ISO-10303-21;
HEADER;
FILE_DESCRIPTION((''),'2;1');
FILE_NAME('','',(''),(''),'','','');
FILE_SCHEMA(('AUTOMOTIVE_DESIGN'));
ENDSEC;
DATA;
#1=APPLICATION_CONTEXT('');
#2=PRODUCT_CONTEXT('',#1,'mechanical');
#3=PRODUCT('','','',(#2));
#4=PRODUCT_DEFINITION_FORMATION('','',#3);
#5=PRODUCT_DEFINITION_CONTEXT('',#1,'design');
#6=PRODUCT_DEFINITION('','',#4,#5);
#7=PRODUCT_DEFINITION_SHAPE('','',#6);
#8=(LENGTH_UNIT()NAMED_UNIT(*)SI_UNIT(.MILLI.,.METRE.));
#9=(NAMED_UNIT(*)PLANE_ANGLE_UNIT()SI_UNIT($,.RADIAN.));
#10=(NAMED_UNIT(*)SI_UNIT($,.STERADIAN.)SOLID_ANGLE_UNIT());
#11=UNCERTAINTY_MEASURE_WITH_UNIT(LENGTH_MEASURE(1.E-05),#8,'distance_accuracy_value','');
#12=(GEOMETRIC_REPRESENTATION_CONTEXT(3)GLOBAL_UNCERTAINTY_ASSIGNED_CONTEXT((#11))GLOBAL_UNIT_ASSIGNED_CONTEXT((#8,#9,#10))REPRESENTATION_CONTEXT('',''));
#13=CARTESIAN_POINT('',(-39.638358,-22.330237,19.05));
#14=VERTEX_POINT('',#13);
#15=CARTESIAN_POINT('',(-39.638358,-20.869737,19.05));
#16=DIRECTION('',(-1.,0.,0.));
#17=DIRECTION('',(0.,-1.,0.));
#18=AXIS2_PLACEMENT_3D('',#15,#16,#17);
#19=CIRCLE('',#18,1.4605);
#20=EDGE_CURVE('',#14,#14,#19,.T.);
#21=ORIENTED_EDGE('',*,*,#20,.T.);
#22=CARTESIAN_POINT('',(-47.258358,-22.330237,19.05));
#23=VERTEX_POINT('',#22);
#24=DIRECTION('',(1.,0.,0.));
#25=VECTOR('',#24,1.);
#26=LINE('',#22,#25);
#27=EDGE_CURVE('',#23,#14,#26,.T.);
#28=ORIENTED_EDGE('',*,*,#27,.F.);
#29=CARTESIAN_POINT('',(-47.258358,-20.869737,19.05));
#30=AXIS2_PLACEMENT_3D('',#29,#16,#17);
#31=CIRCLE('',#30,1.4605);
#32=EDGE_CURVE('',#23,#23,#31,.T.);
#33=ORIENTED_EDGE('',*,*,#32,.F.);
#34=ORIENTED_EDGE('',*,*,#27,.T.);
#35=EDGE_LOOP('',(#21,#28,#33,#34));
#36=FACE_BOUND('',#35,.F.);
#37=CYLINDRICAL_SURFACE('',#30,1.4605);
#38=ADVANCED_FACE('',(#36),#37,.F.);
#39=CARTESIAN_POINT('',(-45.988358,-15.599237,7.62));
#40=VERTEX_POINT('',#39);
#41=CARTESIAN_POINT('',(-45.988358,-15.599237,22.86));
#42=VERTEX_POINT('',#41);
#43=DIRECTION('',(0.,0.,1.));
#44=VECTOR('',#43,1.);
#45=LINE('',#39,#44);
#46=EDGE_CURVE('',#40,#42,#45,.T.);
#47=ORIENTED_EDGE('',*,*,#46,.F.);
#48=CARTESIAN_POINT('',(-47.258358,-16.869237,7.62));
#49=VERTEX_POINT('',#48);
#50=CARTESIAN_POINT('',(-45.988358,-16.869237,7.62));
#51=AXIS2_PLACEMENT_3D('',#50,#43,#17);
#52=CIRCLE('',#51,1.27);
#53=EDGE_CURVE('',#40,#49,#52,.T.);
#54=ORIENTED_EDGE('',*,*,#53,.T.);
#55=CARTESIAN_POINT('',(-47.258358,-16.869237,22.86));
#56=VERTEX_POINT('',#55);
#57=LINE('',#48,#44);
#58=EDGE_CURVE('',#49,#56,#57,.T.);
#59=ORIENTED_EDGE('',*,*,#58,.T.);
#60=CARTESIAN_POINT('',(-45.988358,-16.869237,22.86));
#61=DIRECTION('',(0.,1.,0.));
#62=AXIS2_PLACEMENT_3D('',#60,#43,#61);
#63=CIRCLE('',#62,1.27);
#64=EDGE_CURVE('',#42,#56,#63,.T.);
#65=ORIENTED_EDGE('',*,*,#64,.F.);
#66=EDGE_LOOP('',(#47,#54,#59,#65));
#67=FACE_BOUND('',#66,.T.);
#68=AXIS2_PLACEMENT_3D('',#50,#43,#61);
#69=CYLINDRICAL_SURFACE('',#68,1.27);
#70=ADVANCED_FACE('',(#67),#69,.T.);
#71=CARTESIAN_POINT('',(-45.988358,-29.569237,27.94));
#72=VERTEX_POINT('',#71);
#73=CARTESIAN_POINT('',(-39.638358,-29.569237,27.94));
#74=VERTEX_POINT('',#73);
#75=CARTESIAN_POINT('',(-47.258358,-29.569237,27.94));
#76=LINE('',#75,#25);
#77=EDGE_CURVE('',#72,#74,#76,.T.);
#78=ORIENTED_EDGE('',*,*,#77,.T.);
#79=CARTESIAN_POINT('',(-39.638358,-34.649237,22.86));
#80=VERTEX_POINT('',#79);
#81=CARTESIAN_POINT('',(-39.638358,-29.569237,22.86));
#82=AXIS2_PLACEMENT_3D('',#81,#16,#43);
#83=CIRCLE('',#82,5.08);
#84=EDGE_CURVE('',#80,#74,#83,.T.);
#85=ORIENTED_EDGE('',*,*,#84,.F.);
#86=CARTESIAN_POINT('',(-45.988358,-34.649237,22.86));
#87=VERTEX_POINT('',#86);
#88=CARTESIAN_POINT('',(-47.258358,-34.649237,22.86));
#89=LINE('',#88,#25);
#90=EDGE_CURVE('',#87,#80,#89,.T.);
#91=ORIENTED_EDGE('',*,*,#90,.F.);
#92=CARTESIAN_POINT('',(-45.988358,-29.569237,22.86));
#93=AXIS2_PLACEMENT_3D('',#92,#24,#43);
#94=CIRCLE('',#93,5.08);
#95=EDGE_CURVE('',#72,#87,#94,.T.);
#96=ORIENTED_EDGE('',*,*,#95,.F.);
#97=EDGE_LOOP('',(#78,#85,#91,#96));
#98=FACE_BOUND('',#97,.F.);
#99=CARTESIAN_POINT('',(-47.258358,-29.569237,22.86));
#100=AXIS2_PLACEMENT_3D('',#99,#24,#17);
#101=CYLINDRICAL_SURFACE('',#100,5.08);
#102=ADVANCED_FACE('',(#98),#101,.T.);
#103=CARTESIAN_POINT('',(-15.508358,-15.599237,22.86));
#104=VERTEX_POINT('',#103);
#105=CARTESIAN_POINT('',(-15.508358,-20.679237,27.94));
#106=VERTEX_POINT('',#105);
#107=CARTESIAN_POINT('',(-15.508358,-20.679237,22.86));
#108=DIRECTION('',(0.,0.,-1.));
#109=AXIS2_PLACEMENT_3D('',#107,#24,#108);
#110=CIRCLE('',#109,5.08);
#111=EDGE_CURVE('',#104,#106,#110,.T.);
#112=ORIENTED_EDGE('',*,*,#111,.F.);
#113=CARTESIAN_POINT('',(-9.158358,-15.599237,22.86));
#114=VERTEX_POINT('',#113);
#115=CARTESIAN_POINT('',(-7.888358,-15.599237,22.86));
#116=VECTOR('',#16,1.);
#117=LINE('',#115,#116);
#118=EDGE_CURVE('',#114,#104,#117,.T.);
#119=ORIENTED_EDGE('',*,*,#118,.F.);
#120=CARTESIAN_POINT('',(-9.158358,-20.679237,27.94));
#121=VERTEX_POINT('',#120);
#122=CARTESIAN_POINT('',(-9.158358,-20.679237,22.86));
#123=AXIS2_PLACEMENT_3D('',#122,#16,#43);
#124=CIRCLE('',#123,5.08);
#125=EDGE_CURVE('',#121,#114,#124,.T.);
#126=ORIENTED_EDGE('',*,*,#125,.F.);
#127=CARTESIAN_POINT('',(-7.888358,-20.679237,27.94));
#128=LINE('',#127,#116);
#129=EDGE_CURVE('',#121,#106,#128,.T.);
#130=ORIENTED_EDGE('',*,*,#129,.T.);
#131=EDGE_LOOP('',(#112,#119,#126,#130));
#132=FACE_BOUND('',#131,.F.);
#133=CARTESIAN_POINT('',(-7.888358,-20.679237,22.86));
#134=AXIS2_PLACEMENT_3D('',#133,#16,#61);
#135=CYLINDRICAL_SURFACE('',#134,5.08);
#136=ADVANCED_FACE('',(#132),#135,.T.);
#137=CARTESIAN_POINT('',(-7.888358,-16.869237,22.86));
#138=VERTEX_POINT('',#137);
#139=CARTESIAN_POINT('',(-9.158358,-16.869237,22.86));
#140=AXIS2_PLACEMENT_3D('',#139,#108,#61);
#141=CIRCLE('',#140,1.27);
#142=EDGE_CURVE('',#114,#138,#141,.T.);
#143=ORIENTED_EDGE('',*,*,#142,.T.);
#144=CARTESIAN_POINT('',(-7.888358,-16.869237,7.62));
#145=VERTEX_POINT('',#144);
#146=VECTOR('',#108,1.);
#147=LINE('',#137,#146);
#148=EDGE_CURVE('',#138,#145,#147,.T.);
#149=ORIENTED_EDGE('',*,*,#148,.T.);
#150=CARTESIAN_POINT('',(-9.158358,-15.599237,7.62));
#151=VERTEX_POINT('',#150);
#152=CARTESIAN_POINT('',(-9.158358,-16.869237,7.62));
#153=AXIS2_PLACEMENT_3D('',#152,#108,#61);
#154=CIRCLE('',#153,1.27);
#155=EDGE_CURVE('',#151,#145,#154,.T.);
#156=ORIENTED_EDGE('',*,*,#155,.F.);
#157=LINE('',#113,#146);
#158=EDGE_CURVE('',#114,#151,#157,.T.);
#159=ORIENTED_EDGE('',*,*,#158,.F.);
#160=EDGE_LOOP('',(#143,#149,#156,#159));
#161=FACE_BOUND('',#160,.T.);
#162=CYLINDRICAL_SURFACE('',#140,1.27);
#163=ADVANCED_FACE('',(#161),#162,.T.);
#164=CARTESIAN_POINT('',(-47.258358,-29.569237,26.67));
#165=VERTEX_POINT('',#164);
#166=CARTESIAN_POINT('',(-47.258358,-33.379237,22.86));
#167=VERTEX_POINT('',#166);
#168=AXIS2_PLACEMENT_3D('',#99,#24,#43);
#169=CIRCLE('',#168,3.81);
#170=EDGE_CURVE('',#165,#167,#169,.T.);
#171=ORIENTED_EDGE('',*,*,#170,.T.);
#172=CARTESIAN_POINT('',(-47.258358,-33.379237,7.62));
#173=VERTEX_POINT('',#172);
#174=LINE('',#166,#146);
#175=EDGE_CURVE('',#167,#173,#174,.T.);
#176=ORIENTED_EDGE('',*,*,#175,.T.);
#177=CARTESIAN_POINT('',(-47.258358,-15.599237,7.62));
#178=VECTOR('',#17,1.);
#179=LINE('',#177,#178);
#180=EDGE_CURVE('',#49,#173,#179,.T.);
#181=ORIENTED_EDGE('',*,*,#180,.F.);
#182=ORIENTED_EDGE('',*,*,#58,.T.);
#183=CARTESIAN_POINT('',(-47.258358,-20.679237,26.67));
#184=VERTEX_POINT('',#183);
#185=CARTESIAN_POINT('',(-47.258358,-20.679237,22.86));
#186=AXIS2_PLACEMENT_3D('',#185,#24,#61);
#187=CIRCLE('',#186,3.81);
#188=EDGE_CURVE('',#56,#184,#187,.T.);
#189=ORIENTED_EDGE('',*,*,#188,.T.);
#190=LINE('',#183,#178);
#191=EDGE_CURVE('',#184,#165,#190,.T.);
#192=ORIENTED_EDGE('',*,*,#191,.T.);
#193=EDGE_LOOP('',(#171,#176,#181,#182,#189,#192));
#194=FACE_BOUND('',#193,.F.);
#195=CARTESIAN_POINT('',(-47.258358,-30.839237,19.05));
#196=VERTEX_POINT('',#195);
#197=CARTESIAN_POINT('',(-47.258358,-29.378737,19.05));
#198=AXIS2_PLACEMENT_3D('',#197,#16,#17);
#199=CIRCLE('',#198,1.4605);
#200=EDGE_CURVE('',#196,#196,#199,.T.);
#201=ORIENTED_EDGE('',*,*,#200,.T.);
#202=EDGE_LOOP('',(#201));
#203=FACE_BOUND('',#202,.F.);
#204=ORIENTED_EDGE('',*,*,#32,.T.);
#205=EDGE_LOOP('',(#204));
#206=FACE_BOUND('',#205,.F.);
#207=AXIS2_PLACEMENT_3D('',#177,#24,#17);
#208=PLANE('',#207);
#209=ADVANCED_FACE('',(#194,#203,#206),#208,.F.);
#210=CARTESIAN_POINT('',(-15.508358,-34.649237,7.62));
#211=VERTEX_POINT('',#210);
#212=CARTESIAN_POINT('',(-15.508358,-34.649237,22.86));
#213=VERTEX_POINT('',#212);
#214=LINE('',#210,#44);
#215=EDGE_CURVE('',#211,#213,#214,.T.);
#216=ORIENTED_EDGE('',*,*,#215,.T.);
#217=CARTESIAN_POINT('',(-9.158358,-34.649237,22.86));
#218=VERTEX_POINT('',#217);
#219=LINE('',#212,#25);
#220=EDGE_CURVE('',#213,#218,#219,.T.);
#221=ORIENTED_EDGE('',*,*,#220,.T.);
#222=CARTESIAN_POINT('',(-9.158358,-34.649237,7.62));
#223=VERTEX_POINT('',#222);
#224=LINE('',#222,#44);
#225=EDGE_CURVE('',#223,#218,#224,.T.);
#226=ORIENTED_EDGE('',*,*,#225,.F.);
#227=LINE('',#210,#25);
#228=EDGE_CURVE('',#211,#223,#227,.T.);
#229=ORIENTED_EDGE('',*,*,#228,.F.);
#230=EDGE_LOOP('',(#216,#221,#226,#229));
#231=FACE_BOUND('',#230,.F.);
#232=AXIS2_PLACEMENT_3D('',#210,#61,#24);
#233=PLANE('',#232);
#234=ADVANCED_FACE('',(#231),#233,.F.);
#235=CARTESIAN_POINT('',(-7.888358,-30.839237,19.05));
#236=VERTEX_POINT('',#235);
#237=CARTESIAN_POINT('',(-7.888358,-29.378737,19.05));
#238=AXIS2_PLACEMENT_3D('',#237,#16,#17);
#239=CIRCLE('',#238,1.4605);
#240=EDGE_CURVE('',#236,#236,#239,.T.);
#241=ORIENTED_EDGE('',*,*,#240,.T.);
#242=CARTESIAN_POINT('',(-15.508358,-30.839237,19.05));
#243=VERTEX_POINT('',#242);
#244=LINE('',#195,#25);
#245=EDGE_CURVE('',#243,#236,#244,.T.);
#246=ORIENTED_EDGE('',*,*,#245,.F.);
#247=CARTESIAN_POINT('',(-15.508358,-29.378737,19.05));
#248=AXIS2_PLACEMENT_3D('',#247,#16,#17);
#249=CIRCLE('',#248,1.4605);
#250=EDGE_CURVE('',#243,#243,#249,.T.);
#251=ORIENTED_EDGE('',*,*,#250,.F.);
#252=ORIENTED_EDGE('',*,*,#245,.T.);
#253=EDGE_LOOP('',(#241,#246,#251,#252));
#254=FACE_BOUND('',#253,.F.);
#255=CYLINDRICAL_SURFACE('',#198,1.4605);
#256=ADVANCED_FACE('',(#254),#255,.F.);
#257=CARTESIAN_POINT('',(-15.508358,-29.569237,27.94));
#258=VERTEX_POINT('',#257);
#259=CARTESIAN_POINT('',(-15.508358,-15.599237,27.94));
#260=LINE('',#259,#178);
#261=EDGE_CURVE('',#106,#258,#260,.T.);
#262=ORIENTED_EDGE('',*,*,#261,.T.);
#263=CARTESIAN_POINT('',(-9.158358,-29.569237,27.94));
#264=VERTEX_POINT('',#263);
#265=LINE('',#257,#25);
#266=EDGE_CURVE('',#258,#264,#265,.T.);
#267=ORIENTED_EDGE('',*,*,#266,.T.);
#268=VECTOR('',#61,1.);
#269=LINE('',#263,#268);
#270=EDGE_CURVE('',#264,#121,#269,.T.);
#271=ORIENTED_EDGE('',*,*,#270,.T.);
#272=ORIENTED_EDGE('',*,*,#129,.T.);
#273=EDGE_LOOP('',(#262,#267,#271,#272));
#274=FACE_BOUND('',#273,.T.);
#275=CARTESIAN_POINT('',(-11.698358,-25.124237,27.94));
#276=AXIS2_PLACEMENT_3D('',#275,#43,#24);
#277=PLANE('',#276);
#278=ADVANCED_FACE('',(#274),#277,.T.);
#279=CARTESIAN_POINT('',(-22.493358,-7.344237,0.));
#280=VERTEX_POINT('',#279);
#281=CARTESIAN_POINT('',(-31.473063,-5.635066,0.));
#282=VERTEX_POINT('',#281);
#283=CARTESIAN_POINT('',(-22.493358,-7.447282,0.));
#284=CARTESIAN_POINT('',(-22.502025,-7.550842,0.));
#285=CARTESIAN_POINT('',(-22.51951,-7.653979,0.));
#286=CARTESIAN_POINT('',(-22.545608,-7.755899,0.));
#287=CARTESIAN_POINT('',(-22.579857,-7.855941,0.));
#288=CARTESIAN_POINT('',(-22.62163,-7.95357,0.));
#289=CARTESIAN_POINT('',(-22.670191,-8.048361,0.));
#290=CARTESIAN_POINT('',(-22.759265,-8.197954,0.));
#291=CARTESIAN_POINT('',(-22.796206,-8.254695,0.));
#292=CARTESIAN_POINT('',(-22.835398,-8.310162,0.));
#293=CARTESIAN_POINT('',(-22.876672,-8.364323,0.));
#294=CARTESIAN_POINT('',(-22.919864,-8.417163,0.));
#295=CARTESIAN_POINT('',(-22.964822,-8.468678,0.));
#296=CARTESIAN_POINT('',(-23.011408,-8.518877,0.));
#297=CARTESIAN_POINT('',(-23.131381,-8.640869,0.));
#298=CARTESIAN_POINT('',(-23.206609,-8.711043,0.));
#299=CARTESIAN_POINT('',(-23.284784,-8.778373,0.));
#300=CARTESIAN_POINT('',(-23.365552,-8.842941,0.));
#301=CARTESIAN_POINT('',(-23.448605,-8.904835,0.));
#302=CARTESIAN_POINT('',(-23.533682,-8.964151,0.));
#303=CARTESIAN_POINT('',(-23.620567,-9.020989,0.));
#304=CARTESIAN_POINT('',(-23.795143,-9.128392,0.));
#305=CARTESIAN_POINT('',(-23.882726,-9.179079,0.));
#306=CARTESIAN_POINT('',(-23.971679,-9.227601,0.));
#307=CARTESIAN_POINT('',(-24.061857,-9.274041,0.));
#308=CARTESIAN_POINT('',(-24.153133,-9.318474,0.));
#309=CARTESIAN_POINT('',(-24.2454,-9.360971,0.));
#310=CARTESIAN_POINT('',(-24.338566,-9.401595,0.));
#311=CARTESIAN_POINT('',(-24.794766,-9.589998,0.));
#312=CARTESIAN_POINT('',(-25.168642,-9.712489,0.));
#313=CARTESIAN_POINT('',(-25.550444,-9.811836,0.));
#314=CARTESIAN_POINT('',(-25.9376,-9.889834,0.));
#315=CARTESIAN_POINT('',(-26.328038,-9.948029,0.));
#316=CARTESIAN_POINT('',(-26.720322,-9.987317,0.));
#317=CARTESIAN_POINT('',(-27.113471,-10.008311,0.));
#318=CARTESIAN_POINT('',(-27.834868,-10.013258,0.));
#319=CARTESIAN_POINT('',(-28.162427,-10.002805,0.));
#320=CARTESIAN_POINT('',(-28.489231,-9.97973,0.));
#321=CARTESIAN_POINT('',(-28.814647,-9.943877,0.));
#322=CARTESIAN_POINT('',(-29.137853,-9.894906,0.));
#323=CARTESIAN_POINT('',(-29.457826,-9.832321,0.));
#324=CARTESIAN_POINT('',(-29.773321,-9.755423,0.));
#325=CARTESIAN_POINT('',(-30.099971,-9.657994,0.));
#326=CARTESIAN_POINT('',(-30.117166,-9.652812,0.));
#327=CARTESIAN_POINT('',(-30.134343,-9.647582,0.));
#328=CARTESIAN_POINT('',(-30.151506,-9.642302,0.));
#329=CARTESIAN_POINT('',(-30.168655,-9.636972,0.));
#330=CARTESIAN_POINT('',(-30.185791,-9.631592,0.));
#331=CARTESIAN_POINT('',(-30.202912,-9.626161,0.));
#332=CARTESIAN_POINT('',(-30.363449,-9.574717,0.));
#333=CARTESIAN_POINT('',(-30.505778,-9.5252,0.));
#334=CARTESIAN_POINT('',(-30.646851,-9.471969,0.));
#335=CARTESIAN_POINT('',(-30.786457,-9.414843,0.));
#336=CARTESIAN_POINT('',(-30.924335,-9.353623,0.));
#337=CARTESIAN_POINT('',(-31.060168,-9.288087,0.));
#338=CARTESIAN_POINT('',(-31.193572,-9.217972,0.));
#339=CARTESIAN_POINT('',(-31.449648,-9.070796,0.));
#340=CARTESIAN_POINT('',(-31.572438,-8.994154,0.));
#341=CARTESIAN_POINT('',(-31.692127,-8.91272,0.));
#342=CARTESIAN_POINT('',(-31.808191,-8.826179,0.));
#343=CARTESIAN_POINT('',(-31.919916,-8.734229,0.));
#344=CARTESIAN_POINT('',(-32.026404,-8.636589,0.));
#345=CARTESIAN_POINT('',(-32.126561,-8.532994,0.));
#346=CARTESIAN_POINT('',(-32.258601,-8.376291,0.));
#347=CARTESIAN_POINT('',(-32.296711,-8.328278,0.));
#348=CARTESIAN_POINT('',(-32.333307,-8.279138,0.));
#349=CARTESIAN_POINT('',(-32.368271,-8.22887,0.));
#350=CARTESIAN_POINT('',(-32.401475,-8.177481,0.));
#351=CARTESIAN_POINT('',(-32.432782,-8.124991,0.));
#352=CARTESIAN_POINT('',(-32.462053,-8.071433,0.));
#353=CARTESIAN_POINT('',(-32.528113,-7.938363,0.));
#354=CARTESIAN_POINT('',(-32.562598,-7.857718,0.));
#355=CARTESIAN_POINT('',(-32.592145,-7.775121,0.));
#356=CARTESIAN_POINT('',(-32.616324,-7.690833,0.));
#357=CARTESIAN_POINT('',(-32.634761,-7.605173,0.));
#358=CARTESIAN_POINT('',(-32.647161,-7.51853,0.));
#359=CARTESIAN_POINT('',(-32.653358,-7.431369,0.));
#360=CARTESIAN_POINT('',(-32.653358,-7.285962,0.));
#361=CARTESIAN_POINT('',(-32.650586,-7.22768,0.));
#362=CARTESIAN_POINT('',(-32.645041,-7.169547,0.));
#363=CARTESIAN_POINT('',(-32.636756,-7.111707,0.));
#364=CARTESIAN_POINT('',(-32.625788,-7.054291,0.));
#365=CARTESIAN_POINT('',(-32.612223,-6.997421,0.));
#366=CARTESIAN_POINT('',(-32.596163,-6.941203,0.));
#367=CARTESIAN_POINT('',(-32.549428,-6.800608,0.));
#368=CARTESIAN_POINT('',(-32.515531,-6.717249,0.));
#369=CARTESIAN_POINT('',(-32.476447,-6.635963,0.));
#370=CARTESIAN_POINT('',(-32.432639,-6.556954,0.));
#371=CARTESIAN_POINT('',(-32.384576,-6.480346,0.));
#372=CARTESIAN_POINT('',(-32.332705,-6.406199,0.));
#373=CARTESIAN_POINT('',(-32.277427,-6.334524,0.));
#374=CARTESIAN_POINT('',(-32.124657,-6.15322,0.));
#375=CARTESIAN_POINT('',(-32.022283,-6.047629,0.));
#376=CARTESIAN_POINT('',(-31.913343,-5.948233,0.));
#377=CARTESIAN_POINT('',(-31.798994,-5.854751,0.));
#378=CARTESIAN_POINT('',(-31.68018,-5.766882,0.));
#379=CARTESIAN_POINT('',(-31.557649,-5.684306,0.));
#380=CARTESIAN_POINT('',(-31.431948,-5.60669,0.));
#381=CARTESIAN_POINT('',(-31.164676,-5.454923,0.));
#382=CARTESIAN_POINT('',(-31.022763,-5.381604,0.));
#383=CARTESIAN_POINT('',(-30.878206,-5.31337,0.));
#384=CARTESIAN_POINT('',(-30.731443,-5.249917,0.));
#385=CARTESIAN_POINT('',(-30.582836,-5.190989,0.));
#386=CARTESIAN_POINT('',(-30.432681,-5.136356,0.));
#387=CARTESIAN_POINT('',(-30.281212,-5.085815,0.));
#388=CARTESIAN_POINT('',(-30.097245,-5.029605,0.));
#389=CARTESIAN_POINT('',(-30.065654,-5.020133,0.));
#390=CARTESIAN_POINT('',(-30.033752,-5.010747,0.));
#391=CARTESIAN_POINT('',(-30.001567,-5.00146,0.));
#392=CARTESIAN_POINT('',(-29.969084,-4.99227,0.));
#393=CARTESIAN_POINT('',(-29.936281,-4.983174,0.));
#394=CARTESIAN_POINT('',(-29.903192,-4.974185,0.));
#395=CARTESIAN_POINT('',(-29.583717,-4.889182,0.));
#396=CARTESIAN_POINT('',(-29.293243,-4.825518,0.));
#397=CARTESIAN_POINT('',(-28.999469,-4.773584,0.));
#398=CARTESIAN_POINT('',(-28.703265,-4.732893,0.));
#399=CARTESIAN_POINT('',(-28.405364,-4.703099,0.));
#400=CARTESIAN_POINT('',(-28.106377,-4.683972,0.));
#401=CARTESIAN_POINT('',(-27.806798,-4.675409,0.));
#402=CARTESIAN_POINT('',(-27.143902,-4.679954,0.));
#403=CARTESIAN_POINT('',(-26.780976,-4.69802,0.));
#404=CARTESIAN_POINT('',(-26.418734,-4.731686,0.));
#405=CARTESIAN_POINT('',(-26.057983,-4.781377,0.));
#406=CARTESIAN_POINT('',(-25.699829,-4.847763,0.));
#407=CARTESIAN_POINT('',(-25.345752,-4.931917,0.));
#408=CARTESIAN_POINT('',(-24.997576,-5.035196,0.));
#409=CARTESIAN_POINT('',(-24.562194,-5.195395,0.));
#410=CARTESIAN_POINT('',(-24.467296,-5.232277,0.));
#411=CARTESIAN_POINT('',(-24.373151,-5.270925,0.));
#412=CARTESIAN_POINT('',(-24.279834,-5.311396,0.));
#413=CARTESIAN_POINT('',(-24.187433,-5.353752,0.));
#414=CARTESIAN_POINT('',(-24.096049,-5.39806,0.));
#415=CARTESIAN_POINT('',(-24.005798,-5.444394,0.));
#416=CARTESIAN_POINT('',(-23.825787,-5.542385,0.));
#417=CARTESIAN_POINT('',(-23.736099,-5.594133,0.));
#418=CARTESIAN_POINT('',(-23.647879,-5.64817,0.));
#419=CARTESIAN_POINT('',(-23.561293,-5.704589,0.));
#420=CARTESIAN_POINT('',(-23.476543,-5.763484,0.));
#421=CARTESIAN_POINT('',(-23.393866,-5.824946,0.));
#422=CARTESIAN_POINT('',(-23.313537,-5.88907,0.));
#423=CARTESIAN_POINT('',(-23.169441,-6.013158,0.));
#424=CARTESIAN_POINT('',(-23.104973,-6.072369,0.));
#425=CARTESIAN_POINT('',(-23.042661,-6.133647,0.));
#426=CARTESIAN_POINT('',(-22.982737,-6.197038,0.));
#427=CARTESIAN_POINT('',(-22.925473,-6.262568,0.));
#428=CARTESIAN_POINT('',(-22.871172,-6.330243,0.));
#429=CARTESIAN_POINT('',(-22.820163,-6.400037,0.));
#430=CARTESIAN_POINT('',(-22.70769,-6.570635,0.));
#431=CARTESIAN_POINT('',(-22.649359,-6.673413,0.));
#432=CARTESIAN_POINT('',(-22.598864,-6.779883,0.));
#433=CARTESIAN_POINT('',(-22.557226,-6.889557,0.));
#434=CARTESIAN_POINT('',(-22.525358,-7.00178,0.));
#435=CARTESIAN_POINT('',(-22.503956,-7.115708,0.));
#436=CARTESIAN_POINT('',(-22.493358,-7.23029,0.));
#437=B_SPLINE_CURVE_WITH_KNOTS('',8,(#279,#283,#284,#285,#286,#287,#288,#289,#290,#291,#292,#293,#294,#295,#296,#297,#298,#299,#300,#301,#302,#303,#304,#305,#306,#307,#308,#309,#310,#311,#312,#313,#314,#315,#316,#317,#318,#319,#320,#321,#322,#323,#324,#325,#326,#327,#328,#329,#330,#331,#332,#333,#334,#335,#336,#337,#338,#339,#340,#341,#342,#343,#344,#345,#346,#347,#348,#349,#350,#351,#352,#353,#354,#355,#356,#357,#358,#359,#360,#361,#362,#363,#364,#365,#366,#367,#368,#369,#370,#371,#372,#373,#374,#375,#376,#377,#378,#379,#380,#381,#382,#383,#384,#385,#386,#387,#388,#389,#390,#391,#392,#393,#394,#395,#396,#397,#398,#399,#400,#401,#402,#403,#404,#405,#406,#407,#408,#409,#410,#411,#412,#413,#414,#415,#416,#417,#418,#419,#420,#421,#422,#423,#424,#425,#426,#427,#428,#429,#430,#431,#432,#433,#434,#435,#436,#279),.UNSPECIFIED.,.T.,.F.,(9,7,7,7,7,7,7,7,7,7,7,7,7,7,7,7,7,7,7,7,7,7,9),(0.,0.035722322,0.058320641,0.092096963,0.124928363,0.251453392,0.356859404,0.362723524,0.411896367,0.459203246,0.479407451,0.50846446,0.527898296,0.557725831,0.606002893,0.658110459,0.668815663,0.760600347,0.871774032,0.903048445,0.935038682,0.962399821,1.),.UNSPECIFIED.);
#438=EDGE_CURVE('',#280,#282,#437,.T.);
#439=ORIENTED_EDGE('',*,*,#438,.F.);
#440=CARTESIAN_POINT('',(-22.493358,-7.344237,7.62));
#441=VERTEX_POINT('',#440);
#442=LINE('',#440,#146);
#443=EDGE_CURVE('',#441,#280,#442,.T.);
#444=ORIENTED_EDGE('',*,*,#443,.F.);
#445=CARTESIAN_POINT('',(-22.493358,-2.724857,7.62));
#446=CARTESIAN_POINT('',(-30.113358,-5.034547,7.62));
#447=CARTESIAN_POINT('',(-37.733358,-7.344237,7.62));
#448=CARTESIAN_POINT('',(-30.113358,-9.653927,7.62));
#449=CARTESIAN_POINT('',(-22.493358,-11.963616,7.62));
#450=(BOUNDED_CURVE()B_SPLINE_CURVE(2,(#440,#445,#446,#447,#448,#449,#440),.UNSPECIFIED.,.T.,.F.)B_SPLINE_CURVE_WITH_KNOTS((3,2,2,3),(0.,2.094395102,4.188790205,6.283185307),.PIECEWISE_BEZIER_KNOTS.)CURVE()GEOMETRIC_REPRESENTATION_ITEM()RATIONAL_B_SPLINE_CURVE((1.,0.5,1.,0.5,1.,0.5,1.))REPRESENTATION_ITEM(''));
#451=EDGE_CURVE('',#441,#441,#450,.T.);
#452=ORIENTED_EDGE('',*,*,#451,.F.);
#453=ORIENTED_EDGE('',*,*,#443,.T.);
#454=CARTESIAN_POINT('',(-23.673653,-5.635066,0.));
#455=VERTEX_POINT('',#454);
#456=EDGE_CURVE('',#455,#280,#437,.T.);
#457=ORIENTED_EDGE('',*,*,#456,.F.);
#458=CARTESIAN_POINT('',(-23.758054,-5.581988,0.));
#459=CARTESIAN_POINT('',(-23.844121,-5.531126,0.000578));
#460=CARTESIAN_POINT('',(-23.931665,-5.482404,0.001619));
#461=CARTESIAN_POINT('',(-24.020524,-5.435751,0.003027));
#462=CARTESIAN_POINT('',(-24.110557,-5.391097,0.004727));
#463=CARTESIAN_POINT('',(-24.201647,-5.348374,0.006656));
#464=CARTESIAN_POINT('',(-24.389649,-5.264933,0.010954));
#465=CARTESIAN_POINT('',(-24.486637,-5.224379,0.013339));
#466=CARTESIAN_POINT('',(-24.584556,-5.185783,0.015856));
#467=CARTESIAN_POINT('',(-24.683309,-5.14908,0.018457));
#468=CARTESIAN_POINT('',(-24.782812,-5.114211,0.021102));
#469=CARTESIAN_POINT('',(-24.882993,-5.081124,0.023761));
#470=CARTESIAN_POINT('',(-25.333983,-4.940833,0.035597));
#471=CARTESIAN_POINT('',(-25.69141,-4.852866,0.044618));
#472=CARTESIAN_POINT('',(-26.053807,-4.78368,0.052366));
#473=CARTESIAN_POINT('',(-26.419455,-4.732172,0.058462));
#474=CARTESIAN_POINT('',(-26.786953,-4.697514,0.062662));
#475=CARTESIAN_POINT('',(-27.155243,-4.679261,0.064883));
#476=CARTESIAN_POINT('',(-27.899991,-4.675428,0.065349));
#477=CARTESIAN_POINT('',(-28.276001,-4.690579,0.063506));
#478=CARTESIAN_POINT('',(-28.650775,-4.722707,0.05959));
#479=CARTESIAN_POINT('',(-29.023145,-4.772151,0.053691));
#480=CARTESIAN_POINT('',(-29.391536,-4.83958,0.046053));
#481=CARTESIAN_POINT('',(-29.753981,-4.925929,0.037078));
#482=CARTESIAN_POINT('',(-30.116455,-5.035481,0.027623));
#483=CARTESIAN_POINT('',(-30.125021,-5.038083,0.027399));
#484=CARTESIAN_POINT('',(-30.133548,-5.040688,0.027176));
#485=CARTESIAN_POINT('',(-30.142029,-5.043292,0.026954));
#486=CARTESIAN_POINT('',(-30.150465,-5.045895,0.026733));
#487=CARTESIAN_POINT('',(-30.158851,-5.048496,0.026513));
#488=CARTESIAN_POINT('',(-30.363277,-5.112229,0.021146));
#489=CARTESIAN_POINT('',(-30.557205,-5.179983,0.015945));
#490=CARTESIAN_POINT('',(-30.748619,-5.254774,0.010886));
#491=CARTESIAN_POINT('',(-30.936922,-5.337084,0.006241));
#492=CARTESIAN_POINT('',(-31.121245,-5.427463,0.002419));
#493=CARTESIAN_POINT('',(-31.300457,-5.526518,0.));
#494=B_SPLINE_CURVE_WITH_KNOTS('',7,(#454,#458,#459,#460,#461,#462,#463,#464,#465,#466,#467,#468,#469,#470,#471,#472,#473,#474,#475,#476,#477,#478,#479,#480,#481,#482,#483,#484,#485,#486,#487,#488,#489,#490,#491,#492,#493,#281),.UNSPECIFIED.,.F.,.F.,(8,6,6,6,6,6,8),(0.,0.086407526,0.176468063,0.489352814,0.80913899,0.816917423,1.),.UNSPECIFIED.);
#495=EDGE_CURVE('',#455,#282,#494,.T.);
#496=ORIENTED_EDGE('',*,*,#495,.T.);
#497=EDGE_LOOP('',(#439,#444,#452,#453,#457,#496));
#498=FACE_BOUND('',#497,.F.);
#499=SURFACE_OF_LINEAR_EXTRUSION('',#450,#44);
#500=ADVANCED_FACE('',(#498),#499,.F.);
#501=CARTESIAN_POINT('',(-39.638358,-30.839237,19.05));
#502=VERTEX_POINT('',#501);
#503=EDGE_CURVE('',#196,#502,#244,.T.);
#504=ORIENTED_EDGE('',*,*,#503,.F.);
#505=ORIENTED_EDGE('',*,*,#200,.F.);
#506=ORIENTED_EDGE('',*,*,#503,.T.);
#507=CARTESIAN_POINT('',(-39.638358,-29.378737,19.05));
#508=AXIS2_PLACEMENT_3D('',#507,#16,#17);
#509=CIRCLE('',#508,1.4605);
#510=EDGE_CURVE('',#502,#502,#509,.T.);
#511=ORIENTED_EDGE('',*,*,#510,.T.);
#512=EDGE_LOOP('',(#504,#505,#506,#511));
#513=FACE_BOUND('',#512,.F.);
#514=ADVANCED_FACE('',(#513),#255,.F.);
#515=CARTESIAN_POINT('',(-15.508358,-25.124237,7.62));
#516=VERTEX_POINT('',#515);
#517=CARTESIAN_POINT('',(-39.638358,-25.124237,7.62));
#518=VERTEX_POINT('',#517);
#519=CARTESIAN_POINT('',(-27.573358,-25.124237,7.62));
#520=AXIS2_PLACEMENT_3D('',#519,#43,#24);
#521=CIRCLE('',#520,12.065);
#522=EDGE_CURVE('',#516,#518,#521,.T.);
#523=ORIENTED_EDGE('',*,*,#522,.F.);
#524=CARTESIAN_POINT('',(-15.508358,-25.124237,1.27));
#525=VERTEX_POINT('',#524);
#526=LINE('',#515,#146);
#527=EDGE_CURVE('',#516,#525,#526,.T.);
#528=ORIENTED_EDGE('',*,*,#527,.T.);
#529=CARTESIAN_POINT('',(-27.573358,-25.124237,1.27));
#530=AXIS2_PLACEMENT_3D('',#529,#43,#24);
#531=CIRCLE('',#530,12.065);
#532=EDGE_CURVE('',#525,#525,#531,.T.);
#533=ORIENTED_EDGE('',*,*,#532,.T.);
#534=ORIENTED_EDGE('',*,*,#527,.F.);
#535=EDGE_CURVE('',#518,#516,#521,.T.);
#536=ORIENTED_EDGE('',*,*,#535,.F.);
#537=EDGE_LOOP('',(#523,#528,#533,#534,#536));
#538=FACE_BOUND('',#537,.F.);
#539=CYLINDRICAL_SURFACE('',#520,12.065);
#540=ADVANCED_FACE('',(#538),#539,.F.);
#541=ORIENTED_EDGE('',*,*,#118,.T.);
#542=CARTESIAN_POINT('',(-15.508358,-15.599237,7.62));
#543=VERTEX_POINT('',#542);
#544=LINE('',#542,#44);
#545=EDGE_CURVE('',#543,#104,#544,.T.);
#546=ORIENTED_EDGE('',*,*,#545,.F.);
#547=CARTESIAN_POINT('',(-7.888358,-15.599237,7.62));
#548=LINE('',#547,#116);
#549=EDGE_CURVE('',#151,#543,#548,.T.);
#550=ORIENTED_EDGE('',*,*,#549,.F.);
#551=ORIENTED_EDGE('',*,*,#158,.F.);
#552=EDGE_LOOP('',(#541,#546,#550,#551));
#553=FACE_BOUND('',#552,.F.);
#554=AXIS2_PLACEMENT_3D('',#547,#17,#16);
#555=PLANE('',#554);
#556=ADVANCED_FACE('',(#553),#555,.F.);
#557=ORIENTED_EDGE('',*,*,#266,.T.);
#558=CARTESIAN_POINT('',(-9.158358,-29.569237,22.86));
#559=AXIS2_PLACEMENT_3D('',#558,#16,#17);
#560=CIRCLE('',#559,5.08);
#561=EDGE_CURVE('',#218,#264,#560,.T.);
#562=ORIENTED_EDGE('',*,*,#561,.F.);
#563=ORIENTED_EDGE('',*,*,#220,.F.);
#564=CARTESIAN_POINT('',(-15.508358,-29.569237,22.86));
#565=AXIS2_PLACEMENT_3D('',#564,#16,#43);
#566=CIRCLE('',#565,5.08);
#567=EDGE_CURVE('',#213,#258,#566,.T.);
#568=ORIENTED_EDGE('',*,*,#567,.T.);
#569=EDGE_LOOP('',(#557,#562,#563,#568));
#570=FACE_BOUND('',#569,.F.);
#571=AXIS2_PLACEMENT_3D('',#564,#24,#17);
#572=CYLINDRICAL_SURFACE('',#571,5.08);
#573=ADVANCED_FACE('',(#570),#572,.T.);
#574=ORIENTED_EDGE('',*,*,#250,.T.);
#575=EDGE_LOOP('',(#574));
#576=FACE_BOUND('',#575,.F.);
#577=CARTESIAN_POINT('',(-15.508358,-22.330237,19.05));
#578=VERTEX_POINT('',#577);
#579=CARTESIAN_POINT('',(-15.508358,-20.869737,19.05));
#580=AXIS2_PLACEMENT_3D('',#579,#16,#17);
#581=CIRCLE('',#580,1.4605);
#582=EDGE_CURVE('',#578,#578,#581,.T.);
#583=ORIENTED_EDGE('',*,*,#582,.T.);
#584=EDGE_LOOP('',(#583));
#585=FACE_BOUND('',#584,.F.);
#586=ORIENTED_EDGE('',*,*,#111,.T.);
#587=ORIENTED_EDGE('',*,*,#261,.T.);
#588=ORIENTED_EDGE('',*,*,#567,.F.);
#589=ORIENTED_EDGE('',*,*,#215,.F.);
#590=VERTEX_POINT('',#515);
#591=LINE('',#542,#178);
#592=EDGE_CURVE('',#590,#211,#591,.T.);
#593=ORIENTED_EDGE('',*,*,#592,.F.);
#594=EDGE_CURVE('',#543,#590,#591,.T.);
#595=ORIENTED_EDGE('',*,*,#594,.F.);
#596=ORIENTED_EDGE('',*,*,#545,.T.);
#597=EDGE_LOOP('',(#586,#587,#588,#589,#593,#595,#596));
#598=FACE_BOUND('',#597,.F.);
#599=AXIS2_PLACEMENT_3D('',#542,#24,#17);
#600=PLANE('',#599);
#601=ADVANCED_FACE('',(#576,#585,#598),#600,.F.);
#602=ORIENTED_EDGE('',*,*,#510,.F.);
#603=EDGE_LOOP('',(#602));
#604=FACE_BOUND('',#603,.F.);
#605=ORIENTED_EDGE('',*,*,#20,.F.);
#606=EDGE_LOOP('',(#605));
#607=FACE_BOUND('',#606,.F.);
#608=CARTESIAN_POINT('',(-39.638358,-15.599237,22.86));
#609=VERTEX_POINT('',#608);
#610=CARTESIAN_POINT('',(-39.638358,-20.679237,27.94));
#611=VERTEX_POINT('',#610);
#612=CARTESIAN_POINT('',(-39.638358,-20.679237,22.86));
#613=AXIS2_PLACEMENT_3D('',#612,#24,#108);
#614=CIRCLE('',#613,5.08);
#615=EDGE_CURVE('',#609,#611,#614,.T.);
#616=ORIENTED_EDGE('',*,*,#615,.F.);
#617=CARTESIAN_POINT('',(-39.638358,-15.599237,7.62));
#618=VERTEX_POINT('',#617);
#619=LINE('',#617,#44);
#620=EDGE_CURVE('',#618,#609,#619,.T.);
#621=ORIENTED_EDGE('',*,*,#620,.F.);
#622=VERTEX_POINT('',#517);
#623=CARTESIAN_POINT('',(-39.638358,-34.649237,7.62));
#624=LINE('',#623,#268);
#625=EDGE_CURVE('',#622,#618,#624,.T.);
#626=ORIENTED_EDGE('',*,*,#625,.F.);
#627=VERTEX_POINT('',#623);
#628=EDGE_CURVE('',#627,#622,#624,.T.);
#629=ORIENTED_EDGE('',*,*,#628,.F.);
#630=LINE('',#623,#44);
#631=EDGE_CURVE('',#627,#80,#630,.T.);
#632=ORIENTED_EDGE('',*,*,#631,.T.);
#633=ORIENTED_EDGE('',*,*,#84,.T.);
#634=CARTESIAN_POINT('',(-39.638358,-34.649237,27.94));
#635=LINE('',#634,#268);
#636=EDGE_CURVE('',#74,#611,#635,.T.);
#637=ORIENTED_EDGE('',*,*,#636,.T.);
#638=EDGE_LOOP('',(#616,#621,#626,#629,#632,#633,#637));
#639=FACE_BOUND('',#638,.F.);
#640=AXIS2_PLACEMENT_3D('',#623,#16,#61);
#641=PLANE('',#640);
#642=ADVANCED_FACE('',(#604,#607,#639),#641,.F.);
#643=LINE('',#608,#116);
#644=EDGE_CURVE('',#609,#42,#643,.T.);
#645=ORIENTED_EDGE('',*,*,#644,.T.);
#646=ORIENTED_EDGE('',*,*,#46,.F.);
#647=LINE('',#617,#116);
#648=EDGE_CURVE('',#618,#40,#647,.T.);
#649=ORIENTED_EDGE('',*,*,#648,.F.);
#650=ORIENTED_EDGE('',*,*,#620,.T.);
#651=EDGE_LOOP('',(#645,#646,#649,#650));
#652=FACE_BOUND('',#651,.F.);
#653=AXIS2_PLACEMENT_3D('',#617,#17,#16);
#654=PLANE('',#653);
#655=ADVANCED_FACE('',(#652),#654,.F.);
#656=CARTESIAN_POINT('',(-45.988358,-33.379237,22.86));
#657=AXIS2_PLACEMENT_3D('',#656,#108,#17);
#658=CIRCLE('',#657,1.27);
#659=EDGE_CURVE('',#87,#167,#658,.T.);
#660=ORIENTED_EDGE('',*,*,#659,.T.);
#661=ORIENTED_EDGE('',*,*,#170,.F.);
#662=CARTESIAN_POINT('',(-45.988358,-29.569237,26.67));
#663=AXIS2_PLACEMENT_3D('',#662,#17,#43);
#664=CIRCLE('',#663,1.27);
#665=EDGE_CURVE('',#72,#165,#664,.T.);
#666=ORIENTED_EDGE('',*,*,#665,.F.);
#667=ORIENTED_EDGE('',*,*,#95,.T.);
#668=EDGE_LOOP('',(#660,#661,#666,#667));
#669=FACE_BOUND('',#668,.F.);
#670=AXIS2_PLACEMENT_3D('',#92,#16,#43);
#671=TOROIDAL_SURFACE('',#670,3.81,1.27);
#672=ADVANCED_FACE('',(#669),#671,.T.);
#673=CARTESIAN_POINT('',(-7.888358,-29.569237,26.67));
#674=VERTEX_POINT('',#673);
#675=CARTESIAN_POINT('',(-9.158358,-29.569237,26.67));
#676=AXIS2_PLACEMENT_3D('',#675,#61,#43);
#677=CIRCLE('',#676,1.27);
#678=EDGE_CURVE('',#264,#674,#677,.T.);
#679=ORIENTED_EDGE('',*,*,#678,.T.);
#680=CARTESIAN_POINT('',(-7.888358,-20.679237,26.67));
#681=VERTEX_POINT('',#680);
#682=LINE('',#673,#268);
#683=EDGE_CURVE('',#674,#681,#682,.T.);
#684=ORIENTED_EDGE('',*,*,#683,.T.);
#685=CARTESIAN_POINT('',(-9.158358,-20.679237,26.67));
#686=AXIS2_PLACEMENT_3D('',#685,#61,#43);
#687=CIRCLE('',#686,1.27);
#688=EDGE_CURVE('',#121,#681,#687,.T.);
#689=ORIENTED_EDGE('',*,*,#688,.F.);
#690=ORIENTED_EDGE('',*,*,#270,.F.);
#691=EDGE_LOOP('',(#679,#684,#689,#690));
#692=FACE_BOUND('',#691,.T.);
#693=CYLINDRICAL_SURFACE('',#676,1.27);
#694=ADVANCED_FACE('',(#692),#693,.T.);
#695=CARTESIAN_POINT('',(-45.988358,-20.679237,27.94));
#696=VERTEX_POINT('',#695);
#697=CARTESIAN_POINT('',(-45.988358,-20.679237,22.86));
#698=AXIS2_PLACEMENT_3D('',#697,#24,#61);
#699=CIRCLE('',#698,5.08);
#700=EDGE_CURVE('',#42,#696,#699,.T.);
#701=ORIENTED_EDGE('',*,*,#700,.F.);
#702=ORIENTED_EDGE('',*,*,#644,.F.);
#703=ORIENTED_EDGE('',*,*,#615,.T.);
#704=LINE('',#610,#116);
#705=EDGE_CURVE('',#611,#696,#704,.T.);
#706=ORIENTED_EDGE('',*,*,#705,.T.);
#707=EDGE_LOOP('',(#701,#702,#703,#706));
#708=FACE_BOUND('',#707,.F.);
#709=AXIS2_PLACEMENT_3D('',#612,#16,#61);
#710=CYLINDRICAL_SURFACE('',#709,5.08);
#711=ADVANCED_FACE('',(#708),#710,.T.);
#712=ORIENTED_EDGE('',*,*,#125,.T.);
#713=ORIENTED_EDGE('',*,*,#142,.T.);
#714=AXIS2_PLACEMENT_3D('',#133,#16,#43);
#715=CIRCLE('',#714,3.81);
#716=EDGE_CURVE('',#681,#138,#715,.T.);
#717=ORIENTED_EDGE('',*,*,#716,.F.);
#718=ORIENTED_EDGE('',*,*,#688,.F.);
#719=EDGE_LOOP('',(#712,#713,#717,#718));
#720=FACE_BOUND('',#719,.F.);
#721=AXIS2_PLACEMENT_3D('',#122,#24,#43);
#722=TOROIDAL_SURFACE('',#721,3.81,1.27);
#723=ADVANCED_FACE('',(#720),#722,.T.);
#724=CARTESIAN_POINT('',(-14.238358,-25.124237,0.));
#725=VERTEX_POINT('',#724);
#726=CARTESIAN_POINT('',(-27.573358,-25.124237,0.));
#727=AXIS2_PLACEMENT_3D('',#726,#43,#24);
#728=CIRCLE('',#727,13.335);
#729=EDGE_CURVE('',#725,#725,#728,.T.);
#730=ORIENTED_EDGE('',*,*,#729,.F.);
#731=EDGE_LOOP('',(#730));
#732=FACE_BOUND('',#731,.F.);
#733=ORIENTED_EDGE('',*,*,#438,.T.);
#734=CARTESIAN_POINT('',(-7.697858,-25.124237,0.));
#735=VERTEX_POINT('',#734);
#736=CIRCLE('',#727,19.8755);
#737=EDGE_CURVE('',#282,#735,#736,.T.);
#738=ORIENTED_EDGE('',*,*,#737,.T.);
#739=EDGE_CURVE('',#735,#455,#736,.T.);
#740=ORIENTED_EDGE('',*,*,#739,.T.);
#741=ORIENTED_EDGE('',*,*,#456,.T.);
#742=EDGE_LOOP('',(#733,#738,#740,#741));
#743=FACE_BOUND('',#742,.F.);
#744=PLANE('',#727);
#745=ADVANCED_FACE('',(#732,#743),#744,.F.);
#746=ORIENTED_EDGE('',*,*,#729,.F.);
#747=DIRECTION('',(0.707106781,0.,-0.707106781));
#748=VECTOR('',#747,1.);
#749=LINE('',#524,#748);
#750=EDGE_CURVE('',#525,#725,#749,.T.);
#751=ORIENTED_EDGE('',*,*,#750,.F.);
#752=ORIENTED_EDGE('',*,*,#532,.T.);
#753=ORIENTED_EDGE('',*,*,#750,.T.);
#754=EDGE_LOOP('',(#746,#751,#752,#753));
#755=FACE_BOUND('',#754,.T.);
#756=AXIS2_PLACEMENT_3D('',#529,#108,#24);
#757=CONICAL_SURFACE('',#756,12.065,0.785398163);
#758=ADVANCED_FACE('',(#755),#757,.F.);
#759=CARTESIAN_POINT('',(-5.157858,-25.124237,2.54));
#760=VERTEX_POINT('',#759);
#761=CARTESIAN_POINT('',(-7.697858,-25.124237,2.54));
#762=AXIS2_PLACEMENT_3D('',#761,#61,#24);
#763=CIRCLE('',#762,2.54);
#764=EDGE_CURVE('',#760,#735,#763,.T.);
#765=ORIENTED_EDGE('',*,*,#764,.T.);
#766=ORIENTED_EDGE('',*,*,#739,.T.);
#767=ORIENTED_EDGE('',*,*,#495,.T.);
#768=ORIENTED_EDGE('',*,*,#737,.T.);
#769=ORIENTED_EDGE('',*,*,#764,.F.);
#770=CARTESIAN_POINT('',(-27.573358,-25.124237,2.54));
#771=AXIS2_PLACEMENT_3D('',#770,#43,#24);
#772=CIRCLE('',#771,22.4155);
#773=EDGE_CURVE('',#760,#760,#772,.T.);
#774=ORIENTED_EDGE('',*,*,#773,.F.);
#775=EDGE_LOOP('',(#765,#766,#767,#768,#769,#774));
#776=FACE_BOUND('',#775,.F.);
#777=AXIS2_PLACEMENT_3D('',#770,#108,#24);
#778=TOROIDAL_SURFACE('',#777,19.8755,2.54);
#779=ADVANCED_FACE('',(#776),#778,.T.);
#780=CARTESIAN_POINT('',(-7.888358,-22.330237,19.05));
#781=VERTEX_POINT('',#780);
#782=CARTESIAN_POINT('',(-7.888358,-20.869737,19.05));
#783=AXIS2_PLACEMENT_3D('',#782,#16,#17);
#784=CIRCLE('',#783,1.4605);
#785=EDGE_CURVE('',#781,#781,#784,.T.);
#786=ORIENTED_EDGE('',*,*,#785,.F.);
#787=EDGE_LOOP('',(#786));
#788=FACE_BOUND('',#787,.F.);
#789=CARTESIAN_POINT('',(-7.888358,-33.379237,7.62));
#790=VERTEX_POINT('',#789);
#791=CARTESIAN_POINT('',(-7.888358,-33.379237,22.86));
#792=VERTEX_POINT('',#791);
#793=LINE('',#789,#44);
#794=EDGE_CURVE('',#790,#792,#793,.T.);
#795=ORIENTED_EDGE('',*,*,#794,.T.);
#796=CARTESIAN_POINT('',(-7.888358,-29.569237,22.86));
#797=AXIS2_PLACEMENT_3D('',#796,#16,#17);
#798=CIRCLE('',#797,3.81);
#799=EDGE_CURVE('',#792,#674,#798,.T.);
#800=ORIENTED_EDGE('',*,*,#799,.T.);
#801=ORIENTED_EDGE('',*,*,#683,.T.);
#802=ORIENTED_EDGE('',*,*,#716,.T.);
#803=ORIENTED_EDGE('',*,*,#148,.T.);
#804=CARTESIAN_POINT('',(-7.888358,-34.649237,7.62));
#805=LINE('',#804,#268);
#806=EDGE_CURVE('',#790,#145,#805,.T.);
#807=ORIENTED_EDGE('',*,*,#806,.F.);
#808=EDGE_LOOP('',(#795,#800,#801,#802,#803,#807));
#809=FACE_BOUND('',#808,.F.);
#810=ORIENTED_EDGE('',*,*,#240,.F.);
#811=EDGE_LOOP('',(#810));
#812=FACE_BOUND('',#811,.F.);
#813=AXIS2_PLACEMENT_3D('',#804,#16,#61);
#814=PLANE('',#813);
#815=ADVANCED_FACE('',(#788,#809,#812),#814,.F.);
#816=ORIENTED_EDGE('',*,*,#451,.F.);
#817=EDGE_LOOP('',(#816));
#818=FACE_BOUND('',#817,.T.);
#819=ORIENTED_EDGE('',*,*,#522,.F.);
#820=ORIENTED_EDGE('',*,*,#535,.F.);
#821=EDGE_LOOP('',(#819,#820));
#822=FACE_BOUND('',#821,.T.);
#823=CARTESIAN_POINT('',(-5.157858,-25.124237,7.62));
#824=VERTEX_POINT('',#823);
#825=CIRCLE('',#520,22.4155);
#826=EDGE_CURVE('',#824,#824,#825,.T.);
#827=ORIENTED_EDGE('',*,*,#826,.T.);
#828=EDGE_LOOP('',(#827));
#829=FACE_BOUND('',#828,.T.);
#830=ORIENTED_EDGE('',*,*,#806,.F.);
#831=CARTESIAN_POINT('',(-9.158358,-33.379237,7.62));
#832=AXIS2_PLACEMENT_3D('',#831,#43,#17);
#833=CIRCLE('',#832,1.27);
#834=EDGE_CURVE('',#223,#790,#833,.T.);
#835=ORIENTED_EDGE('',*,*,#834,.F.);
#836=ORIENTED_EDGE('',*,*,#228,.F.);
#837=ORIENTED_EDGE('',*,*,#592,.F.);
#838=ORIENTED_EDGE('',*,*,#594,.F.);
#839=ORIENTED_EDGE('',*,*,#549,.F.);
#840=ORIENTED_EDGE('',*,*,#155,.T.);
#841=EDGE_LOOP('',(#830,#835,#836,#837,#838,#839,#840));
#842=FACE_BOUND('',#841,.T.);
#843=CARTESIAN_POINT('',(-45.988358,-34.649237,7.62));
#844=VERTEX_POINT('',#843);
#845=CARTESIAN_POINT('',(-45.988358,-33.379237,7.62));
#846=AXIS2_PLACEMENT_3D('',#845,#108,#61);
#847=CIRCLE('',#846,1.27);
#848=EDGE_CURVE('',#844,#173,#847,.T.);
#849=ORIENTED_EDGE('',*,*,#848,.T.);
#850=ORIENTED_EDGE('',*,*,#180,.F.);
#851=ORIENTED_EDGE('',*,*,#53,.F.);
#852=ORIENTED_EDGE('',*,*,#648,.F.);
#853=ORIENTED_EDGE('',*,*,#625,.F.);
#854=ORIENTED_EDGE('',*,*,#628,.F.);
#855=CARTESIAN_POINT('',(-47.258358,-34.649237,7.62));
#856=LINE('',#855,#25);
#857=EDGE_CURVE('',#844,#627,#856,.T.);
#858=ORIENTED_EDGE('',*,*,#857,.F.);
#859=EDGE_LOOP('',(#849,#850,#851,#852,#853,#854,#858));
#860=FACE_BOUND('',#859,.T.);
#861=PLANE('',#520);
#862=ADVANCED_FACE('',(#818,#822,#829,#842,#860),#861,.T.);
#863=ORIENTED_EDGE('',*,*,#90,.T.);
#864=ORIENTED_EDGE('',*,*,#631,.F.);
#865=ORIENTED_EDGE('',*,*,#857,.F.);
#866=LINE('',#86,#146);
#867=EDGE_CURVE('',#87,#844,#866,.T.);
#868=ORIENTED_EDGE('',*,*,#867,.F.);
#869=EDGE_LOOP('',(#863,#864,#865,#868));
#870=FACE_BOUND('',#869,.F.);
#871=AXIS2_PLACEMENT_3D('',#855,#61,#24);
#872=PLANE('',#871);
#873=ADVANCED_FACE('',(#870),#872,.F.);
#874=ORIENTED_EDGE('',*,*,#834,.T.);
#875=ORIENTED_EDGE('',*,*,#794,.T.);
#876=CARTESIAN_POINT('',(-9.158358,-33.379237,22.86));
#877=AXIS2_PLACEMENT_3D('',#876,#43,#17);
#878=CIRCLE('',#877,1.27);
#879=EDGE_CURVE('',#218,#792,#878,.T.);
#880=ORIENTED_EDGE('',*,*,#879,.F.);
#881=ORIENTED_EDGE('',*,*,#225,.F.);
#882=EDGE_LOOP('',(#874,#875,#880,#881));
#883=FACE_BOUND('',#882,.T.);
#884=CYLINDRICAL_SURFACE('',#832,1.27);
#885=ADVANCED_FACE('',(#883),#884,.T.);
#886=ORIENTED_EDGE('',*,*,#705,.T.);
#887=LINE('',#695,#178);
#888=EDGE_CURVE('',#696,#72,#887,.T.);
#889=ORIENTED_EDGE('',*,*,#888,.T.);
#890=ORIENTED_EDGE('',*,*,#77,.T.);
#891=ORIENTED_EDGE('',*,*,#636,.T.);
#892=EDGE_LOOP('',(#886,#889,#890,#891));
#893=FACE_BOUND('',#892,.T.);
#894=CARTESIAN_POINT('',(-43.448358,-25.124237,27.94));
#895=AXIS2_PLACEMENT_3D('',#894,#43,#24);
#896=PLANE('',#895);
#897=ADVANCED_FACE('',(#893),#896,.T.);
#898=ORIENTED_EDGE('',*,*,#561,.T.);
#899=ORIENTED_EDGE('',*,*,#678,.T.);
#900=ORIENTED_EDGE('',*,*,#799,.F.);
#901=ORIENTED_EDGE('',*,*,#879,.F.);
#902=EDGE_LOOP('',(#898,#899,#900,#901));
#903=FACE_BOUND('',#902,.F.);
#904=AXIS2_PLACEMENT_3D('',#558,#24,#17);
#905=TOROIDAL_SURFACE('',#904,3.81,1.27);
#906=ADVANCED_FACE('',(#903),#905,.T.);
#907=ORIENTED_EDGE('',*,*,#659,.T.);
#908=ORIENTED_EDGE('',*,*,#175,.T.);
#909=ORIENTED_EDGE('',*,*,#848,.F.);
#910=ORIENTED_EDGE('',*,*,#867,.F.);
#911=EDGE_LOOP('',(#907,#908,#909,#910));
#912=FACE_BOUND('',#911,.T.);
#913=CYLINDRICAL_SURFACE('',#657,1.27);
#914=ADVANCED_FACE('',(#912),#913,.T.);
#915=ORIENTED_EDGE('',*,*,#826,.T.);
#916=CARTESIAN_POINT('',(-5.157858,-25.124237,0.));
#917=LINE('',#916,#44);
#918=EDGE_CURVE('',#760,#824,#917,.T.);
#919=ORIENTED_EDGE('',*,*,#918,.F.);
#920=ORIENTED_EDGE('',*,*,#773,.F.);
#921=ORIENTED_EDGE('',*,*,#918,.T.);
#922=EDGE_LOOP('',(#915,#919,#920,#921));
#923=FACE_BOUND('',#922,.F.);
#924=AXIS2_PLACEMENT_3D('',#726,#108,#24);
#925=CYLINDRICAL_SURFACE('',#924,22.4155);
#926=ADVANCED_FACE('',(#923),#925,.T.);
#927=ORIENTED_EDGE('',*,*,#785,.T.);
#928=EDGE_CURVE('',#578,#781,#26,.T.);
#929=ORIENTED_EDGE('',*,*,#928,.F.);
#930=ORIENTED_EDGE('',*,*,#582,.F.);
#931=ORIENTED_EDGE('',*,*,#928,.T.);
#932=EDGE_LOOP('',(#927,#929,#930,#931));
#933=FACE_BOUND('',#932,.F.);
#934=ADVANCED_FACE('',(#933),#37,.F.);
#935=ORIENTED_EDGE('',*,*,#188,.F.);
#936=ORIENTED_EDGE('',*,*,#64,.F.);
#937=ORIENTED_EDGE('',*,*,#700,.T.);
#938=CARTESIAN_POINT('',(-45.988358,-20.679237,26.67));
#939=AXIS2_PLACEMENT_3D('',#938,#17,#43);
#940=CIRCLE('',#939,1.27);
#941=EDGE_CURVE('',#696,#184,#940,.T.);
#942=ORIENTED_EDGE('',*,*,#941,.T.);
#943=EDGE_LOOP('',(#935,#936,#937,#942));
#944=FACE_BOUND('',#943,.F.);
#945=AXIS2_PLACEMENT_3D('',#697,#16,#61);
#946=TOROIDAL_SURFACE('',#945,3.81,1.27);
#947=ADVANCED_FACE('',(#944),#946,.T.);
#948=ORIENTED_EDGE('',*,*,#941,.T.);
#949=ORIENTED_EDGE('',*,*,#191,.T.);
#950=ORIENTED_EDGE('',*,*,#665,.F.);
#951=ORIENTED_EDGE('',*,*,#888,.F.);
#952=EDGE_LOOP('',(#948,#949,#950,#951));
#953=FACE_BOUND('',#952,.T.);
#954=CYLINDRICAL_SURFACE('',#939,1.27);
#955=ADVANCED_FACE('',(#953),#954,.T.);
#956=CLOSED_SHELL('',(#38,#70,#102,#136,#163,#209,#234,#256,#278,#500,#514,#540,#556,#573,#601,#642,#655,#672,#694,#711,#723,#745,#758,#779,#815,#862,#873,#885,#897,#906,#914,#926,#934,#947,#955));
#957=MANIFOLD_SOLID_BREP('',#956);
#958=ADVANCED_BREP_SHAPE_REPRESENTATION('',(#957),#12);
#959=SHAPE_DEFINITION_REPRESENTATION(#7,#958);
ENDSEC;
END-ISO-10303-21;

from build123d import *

# Parameters (mm, degrees)
F0_R     = 22.4155
F1_DEPTH = 7.62
F2_R     = 12.065
F3_DEPTH = 25.4
F5_DEPTH = 20.32
F6_R     = 5.08
F7_R     = 1.27
F8_R     = 1.4605
F9_DEPTH = 76.2
F11_SIZE = 1.27


# Not quite as in the source:
# - a fillet or chamfer that OpenCascade refuses, or shapes differently, is made with other operations: its cross-section is extruded or revolved along the edge and cut away or added


with BuildPart() as f1:
    # F0 (on Top) → F1 (new body)
    with BuildSketch(Plane.XY):
        with Locations((-27.5733582675, -25.1242369413)):
            Circle(F0_R)
    extrude(amount=F1_DEPTH)

    # F2 (on face) → F3 (cut)
    with BuildSketch(Plane.XY.offset(7.62)):
        with BuildLine():
            add(Edge.make_bspline(
                [(-22.4933582675, -7.3442369413), (-22.4933582675, -2.7248574376), (-30.1133582675, -5.0345471894), (-37.7333582675, -7.3442369413), (-30.1133582675, -9.6539266932), (-22.4933582675, -11.9636164451), (-22.4933582675, -7.3442369413)],
                knots=[0, 0, 0, 2.0943951024, 2.0943951024, 4.1887902048, 4.1887902048, 6.2831853072, 6.2831853072, 6.2831853072], degree=2, weights=[1, 0.5, 1, 0.5, 1, 0.5, 1]))
        make_face()
        with Locations((-27.5733582675, -25.1242369413)):
            Circle(F2_R)
    extrude(amount=-F3_DEPTH, mode=Mode.SUBTRACT)

    # F4 (on face) → F5 (join)
    with BuildSketch(Plane.XY.offset(7.62)):
        Polygon((-39.6383582675, -34.6492369413), (-39.6383582675, -25.1242369413), (-39.6383582675, -15.5992369413), (-47.2583582675, -15.5992369413), (-47.2583582675, -34.6492369413), align=None)
        Polygon((-7.8883582675, -34.6492369413), (-7.8883582675, -15.5992369413), (-15.5083582675, -15.5992369413), (-15.5083582675, -25.1242369413), (-15.5083582675, -34.6492369413), align=None)
    extrude(amount=F5_DEPTH)

    # F6
    f6_edges = [f1.edges().sort_by_distance(p)[0] for p in [
        (-11.698358, -34.649237, 27.94),
        (-11.698358, -15.599237, 27.94),
        (-43.448358, -34.649237, 27.94),
        (-43.448358, -15.599237, 27.94),
    ]]
    fillet(f6_edges, radius=F6_R)

    # F7
    f7_edges = [f1.edges().sort_by_distance(p)[0] for p in [
        (-7.888358, -34.649237, 15.24),
        (-47.258358, -15.599237, 15.24),
        (-47.258358, -34.649237, 15.24),
        (-47.258358, -33.161339, 26.452102),
        (-47.258358, -25.124237, 27.94),
        (-47.258358, -17.087134, 26.452102),
        (-7.888358, -33.161339, 26.452102),
        (-7.888358, -25.124237, 27.94),
        (-7.888358, -15.599237, 15.24),
        (-7.888358, -17.087134, 26.452102),
    ]]
    fillet(f7_edges, radius=F7_R)

    # F8 (on face) → F9 (cut)
    with BuildSketch(Plane(origin=(-47.2583582675, 0, 0), x_dir=(0, -1, 0), z_dir=(-1, 0, 0))):
        with Locations((20.8697369413, 19.05)):
            Circle(F8_R)
        with Locations((29.3787369413, 19.05)):
            Circle(F8_R)
    extrude(amount=-F9_DEPTH, mode=Mode.SUBTRACT)

    # F10: fillet of radius 2.54 on 1 edges, made by hand

    # F10_s1 → F10_t2 (revolve, cut)
    with BuildSketch(Plane.XZ.offset(25.1242369413)):
        with BuildLine():
            ThreePointArc((-5.1578582675, 2.54), (-5.9018070433, 0.7439487758), (-7.6978582675, 0))
            Line((-7.6978582675, 0), (-7.6978582675, -0.0508))
            Line((-7.6978582675, -0.0508), (-5.1070582675, -0.0508))
            Line((-5.1070582675, -0.0508), (-5.1070582675, 2.54))
            Line((-5.1070582675, 2.54), (-5.1578582675, 2.54))
        make_face()
    revolve(axis=Axis((-27.5733582675, -25.1242369413, 0), (0, 0, 1)), mode=Mode.SUBTRACT)

    # F11
    f11_edges = [f1.edges().sort_by_distance(p)[0] for p in [
        (-39.638358, -25.124237, 0),
    ]]
    chamfer(f11_edges, length=F11_SIZE)


solid = f1.part
